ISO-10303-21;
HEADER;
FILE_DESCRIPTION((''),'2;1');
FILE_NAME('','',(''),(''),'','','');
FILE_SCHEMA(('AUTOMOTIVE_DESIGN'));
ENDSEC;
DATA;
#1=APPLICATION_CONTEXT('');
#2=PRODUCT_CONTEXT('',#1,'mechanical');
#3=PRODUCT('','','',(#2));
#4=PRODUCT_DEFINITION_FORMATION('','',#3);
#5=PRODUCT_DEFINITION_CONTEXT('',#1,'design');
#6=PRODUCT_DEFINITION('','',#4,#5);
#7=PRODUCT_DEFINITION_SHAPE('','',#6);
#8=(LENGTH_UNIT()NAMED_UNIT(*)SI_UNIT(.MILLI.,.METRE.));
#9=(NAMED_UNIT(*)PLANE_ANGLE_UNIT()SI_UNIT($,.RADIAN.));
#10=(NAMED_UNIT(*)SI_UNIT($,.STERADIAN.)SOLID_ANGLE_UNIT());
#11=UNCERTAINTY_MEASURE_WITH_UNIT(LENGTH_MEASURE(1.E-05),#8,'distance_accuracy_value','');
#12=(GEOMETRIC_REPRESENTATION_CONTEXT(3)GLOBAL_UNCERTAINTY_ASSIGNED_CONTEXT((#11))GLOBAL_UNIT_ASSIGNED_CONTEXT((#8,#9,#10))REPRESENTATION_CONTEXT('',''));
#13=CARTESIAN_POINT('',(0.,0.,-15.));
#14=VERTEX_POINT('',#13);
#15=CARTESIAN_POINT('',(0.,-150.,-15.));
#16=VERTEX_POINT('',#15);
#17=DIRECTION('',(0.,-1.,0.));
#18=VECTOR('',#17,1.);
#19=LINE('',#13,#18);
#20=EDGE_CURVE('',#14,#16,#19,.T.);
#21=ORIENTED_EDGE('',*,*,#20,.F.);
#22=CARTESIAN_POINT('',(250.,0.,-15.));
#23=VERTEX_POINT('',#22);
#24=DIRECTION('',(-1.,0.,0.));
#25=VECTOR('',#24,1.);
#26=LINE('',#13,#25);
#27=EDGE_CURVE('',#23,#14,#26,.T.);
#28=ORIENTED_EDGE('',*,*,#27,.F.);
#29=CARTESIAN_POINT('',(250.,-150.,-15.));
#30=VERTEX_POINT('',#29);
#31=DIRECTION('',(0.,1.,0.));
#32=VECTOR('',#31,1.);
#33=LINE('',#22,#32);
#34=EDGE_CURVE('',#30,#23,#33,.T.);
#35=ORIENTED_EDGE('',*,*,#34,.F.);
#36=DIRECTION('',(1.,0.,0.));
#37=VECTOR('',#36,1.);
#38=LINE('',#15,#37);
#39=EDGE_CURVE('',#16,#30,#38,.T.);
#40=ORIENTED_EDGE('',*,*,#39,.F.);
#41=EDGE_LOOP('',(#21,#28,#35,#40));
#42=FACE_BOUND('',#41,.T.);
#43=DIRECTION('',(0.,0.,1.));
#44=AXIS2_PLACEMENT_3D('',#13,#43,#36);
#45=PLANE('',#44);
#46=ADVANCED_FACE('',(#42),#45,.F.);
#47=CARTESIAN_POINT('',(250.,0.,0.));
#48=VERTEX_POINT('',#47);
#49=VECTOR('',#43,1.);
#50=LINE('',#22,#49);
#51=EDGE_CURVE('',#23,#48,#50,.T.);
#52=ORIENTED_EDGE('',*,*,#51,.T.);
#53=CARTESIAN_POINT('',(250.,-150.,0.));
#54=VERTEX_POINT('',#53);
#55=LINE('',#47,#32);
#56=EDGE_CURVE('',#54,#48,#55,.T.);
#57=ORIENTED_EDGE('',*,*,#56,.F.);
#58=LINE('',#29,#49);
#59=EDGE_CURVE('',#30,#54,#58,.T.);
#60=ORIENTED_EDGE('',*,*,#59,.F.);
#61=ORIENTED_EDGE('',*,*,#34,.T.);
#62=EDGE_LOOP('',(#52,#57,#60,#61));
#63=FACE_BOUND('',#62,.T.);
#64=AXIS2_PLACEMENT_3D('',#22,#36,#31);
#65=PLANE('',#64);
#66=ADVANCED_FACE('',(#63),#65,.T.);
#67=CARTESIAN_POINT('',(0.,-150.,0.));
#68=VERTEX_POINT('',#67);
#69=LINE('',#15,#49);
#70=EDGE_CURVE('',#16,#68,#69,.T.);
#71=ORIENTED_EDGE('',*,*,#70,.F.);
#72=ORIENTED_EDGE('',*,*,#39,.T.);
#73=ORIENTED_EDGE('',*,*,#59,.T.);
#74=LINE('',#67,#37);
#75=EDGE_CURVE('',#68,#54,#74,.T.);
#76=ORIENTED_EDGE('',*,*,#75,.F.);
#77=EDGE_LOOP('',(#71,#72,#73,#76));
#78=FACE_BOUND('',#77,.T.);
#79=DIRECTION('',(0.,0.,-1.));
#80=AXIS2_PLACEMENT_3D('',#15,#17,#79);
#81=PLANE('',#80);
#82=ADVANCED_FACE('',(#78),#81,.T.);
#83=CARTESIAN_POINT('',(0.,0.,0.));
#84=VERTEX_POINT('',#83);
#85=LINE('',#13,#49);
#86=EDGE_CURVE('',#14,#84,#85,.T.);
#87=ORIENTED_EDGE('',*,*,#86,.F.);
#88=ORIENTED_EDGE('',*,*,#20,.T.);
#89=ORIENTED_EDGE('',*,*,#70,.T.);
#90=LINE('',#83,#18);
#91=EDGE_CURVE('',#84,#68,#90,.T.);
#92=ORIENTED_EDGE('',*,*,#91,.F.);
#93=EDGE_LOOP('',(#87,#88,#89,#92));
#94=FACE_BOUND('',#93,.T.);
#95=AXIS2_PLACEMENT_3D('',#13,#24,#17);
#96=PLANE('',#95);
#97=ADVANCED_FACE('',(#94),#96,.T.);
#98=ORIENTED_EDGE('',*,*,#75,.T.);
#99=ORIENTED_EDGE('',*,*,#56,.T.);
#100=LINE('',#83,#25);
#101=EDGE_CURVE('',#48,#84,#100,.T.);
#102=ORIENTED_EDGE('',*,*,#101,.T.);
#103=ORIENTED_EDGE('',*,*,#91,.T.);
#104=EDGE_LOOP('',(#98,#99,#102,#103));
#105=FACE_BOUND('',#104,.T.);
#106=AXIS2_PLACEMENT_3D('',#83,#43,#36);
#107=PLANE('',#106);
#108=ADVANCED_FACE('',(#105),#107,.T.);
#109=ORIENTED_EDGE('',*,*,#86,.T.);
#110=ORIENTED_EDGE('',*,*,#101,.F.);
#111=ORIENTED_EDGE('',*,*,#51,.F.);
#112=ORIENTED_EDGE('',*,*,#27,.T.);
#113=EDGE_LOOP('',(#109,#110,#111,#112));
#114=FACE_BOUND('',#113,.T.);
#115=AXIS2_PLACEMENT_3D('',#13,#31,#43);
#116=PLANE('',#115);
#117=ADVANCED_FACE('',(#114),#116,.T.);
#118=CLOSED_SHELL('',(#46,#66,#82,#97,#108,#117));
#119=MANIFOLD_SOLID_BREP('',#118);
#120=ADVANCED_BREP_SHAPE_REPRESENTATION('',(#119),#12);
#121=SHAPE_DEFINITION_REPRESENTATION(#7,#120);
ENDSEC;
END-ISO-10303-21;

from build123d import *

# Parameters (mm, degrees)
IZIM1_W            = 250
IZIM1_H            = 150
TABAN_FLAN_1_DEPTH = 15


# Sheet-metal steps are written as plain solids
with BuildPart() as part:
    # Çizim1 → Taban-Flanş1 (new body)
    with BuildSketch(Plane.XY):
        with Locations((125, -75)):
            Rectangle(IZIM1_W, IZIM1_H)
    extrude(amount=-TABAN_FLAN_1_DEPTH)


solid = part.part
